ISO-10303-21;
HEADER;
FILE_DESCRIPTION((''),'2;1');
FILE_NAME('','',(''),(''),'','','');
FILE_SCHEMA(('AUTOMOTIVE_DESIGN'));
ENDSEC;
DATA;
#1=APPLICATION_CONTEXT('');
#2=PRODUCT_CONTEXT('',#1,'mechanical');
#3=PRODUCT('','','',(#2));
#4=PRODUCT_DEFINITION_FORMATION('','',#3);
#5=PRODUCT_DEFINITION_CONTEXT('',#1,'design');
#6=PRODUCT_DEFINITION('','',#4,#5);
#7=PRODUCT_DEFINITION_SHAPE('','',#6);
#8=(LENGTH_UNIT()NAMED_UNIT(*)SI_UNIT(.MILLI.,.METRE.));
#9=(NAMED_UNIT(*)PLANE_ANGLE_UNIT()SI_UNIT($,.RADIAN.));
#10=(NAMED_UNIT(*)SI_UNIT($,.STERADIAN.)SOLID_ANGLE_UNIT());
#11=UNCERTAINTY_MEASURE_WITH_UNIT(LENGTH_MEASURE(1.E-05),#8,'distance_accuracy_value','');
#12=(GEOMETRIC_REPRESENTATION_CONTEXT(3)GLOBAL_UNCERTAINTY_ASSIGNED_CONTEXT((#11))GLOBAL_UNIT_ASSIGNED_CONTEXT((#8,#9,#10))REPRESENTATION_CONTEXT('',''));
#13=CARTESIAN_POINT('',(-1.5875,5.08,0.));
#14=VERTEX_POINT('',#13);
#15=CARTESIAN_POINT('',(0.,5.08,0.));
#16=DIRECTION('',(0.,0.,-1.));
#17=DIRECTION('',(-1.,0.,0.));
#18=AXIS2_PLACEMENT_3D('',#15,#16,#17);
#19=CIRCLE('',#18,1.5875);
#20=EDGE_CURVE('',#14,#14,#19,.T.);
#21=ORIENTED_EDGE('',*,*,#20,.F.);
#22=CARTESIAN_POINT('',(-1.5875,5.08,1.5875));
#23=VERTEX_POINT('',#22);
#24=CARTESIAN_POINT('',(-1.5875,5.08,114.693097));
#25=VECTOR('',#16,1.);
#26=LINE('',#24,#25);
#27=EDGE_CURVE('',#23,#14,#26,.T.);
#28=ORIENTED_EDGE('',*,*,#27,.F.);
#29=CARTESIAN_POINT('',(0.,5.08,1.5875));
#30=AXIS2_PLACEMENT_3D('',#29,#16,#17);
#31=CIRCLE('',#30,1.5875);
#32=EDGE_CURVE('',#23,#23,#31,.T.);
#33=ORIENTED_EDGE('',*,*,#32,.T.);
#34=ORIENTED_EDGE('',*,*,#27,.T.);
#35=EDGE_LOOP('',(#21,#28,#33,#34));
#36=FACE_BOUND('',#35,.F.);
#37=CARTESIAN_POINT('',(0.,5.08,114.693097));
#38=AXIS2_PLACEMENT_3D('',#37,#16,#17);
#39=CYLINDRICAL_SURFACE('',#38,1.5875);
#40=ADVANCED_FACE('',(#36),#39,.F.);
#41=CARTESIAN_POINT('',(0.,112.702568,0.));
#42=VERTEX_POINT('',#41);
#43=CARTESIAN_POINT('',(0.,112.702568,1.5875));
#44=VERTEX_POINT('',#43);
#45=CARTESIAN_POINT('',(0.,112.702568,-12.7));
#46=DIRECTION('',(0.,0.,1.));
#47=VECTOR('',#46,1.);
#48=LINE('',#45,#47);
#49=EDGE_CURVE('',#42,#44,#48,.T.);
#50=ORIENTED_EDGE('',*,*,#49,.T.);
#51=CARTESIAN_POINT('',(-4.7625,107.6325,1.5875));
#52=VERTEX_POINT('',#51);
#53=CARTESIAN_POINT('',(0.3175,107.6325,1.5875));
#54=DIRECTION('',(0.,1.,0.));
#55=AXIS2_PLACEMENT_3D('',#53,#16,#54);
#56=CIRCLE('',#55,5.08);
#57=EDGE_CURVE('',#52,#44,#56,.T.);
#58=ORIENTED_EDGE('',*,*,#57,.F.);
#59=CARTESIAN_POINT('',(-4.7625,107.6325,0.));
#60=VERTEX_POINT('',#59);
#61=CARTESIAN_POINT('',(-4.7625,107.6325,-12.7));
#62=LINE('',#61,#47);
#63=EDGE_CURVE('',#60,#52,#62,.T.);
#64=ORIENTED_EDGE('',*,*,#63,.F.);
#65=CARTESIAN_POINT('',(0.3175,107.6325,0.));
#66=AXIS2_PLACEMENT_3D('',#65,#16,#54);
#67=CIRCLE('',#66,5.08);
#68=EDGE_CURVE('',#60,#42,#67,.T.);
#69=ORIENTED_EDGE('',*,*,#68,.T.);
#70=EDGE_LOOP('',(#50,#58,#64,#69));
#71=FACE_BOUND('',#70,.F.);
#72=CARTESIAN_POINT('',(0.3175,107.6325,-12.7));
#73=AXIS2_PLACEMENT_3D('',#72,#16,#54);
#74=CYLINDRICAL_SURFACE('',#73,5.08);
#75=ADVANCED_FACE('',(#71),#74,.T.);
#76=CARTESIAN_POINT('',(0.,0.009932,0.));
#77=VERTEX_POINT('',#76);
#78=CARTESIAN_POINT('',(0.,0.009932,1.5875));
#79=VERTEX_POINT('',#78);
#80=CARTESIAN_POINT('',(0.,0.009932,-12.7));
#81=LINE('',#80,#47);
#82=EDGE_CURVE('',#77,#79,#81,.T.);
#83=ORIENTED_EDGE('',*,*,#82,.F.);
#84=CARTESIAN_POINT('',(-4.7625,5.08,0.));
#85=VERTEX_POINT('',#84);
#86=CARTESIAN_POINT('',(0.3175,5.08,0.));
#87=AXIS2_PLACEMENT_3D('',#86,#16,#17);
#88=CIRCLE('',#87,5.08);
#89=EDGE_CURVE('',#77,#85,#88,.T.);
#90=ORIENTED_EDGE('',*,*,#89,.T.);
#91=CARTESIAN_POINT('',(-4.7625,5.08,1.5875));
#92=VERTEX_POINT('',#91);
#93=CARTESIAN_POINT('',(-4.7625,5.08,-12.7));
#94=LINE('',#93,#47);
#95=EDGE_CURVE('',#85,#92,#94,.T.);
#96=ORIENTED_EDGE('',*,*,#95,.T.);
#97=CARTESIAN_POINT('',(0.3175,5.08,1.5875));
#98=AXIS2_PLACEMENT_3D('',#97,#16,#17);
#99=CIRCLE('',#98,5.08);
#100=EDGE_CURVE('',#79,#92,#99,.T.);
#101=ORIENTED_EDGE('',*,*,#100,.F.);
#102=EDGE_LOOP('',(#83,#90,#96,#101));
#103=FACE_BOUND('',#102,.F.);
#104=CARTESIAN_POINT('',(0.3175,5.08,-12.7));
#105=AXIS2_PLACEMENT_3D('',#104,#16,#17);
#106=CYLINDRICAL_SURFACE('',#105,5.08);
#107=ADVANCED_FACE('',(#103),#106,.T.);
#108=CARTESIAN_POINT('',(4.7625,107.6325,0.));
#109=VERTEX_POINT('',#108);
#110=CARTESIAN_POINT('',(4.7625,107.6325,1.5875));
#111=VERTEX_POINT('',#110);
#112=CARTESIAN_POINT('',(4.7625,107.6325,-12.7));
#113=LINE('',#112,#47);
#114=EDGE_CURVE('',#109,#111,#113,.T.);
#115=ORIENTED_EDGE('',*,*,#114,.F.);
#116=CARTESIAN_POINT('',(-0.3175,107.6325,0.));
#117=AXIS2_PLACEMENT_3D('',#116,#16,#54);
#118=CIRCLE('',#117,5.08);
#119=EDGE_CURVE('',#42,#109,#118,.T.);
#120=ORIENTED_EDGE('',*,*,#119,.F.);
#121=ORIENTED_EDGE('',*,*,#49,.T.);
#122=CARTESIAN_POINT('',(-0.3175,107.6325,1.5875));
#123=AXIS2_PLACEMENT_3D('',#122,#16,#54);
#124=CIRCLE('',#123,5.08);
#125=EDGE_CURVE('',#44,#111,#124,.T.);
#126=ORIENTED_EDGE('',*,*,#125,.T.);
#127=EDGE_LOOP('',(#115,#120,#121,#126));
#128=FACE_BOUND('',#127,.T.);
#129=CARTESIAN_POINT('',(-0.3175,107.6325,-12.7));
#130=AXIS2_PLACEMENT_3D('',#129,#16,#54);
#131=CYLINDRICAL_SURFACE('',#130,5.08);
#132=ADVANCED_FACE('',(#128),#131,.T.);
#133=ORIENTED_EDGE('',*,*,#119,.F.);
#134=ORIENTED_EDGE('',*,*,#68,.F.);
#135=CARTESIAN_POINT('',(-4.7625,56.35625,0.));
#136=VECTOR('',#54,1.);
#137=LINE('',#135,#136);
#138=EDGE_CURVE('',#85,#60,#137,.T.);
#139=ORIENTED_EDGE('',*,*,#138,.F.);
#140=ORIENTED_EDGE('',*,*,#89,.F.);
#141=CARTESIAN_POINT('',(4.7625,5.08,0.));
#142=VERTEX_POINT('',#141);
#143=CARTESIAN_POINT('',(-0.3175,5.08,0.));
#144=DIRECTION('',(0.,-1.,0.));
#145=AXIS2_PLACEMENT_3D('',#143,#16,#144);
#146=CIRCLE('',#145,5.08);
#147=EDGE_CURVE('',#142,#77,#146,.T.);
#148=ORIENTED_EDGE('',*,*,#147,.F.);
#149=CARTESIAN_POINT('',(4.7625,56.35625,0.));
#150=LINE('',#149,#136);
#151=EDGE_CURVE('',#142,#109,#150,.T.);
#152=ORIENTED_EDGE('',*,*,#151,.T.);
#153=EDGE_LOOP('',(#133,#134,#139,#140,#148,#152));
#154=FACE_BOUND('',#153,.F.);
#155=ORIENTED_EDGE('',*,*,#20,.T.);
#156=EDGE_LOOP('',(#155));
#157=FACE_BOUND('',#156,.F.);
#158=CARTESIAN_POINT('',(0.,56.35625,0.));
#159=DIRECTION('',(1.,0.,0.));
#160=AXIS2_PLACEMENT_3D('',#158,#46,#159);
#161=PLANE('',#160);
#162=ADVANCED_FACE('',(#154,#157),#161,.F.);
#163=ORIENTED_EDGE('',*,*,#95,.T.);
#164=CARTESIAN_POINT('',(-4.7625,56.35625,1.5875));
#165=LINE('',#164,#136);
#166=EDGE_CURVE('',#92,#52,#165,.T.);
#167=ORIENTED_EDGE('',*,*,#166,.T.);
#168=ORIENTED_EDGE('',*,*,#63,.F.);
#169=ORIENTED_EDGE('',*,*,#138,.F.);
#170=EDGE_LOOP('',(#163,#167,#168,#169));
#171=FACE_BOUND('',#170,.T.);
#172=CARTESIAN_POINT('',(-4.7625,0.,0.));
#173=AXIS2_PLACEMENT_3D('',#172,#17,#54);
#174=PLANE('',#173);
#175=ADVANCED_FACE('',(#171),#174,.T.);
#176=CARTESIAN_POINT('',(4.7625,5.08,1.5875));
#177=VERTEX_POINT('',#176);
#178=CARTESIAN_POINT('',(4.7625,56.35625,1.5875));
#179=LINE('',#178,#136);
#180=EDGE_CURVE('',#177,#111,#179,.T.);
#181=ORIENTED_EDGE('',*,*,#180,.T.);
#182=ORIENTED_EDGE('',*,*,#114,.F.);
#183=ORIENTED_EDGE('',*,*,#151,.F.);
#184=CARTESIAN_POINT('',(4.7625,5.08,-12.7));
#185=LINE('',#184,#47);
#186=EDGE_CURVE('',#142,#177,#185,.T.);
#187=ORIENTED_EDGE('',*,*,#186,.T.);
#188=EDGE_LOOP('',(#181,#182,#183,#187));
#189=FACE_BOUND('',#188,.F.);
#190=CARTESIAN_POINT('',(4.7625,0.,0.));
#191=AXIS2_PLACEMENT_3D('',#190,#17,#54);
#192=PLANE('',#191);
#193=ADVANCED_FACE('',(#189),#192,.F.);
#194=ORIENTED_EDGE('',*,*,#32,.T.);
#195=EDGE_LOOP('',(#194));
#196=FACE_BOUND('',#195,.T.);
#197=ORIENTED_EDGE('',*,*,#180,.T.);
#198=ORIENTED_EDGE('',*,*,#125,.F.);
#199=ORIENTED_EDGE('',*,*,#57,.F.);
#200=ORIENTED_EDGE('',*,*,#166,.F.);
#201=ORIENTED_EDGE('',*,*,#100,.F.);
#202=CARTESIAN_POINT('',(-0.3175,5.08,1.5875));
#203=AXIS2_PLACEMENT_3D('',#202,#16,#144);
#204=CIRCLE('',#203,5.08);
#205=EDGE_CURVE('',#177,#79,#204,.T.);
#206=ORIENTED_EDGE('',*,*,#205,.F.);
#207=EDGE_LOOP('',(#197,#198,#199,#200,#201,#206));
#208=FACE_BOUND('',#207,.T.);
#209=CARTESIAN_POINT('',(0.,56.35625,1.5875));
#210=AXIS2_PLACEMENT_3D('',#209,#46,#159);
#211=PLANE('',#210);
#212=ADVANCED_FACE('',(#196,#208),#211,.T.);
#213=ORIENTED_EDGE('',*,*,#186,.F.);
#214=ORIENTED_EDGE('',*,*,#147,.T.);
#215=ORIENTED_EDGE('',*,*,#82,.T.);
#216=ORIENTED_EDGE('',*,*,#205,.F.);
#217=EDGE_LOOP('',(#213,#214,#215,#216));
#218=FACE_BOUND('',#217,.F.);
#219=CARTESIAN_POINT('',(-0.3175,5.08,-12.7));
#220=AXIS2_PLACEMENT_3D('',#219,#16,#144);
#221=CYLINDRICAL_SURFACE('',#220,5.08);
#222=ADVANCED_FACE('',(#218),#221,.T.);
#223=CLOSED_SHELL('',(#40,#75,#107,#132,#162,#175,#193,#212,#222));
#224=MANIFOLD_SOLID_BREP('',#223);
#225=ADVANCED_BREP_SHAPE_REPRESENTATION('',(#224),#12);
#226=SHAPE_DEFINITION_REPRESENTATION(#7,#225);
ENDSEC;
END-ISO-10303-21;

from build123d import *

# Parameters (mm, degrees)
F0_W        = 9.525
F0_H        = 112.7125
F1_DEPTH    = 1.5875
F2_T1_DEPTH = 26.9875
F4_D        = 3.175


# Not quite as in the source:
# - a fillet or chamfer that OpenCascade refuses, or shapes differently, is made with other operations: its cross-section is extruded or revolved along the edge and cut away or added


with BuildPart() as f1:
    # F0 (on Top) → F1 (new body)
    with BuildSketch(Plane.XY):
        with Locations((0, 56.35625)):
            Rectangle(F0_W, F0_H)
    extrude(amount=F1_DEPTH)

    # F2: fillet of radius 5.08 on 4 edges, made by hand

    # F2_s2 → F2_t1 (cut)
    with BuildSketch(Plane.XY.offset(-12.7)):
        with BuildLine():
            ThreePointArc((-0.3175, 0), (3.2746024484, 1.4878975516), (4.7625, 5.08))
            Line((4.7625, 5.08), (4.7625, 0))
            Line((4.7625, 0), (-0.3175, 0))
        make_face()
        with BuildLine():
            ThreePointArc((-4.7625, 5.08), (-3.2746024484, 1.4878975516), (0.3175, 0))
            Line((0.3175, 0), (-4.7625, 0))
            Line((-4.7625, 0), (-4.7625, 5.08))
        make_face()
        with BuildLine():
            ThreePointArc((-0.3175, 112.7125), (3.2746024484, 111.2246024484), (4.7625, 107.6325))
            Line((4.7625, 107.6325), (4.7625, 112.7125))
            Line((4.7625, 112.7125), (-0.3175, 112.7125))
        make_face()
        with BuildLine():
            ThreePointArc((0.3175, 112.7125), (-3.2746024484, 111.2246024484), (-4.7625, 107.6325))
            Line((-4.7625, 107.6325), (-4.7625, 112.7125))
            Line((-4.7625, 112.7125), (0.3175, 112.7125))
        make_face()
    extrude(amount=F2_T1_DEPTH, mode=Mode.SUBTRACT)

    # F4 (through all)
    with Locations(Plane.XY.offset(1.5875)):
        with Locations((0, 5.08)):
            Hole(F4_D / 2)


solid = f1.part
